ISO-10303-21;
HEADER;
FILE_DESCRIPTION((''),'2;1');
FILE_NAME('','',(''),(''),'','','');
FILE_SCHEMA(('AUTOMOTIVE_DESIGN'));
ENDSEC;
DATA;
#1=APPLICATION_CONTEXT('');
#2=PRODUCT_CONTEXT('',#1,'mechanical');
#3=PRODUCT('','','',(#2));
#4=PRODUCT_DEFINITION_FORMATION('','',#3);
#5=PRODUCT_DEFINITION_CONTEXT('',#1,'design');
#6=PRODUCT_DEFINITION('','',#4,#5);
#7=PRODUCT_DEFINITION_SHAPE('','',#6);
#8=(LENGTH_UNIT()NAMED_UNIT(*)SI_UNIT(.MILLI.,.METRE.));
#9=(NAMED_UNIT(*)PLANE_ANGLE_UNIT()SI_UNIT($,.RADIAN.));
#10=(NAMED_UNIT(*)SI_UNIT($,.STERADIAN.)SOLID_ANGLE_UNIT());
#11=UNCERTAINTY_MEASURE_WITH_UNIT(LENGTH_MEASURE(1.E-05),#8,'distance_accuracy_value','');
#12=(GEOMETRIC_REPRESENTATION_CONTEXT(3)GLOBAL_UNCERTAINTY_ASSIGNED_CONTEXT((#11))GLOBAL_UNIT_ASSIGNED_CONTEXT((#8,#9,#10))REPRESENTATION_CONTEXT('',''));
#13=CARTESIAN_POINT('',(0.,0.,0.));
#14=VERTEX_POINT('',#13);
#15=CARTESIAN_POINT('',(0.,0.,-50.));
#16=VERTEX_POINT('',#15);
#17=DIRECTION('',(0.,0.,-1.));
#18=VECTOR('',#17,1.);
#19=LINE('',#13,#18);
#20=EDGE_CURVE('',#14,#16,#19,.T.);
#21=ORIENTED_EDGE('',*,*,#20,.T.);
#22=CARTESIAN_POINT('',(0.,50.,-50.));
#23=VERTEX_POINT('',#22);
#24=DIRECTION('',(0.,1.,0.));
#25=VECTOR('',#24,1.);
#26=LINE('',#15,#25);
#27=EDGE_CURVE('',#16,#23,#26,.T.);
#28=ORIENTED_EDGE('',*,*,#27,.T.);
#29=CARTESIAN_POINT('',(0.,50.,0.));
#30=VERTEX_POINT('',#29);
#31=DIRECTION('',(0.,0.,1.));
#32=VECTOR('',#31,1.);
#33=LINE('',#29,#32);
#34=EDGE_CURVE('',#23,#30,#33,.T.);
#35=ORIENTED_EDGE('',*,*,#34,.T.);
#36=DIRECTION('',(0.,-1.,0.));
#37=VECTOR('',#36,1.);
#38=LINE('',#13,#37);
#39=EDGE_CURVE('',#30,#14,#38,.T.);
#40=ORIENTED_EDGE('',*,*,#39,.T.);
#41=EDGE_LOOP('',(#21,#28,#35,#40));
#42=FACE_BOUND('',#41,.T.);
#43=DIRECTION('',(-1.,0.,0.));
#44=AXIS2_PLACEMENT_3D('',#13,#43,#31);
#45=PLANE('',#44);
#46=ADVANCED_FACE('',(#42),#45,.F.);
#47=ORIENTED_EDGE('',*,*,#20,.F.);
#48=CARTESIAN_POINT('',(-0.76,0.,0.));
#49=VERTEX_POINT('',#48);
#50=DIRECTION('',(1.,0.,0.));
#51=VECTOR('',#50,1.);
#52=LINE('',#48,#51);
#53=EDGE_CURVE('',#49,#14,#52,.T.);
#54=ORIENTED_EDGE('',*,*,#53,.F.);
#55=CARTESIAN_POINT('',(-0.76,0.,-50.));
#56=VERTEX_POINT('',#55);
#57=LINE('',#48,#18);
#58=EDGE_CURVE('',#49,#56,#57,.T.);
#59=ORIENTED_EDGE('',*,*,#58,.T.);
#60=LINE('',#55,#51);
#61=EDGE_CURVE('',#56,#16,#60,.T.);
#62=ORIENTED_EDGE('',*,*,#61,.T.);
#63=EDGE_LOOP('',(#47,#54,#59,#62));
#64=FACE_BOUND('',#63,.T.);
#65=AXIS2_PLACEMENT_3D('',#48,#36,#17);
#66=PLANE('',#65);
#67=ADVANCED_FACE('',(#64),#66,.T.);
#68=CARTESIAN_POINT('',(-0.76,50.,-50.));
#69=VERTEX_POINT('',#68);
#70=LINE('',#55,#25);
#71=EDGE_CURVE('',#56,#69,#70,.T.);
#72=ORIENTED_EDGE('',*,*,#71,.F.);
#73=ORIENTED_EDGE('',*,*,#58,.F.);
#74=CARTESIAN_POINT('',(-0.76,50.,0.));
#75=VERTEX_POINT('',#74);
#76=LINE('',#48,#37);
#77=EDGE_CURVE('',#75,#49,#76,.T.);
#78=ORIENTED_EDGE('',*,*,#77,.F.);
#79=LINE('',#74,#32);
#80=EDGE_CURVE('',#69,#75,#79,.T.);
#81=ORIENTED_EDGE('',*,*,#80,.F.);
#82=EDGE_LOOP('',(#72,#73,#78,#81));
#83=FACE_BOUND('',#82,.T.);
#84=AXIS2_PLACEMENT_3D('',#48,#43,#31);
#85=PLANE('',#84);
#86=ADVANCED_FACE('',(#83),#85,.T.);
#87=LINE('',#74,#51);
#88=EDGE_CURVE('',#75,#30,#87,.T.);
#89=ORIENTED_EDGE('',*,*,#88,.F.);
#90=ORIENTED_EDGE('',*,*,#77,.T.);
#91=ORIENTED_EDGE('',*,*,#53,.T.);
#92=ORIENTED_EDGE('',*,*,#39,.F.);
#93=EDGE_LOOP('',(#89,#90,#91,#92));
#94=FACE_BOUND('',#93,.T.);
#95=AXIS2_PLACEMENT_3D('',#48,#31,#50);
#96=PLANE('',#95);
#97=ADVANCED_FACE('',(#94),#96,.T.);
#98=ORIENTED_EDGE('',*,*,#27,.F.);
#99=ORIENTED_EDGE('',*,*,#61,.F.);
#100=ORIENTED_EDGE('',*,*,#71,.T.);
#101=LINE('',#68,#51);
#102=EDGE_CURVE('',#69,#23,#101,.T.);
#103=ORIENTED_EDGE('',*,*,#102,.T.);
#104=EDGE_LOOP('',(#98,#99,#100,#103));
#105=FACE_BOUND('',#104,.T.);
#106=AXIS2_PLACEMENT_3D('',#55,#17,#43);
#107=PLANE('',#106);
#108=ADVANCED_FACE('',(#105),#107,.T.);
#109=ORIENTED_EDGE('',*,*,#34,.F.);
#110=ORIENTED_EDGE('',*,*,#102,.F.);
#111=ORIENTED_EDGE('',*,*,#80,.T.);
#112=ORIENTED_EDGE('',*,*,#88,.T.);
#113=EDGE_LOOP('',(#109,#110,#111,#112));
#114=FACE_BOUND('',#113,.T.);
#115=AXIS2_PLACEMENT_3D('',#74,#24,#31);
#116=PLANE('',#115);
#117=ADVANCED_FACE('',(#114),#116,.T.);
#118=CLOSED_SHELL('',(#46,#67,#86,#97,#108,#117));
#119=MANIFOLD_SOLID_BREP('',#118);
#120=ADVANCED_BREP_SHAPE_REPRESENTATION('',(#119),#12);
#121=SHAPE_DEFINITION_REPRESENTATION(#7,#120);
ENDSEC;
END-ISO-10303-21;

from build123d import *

# Parameters (mm, degrees)
SKETCH1_W          = 50
SKETCH1_H          = 50
BASE_FLANGE1_DEPTH = 0.76


# Sheet-metal steps are written as plain solids
with BuildPart() as part:
    # Sketch1 → Base-Flange1 (new body)
    with BuildSketch(Plane(origin=(0, 0, 0), x_dir=(0, 0, -1), z_dir=(1, 0, 0))):
        with Locations((25, 25)):
            Rectangle(SKETCH1_W, SKETCH1_H)
    extrude(amount=-BASE_FLANGE1_DEPTH)


solid = part.part
